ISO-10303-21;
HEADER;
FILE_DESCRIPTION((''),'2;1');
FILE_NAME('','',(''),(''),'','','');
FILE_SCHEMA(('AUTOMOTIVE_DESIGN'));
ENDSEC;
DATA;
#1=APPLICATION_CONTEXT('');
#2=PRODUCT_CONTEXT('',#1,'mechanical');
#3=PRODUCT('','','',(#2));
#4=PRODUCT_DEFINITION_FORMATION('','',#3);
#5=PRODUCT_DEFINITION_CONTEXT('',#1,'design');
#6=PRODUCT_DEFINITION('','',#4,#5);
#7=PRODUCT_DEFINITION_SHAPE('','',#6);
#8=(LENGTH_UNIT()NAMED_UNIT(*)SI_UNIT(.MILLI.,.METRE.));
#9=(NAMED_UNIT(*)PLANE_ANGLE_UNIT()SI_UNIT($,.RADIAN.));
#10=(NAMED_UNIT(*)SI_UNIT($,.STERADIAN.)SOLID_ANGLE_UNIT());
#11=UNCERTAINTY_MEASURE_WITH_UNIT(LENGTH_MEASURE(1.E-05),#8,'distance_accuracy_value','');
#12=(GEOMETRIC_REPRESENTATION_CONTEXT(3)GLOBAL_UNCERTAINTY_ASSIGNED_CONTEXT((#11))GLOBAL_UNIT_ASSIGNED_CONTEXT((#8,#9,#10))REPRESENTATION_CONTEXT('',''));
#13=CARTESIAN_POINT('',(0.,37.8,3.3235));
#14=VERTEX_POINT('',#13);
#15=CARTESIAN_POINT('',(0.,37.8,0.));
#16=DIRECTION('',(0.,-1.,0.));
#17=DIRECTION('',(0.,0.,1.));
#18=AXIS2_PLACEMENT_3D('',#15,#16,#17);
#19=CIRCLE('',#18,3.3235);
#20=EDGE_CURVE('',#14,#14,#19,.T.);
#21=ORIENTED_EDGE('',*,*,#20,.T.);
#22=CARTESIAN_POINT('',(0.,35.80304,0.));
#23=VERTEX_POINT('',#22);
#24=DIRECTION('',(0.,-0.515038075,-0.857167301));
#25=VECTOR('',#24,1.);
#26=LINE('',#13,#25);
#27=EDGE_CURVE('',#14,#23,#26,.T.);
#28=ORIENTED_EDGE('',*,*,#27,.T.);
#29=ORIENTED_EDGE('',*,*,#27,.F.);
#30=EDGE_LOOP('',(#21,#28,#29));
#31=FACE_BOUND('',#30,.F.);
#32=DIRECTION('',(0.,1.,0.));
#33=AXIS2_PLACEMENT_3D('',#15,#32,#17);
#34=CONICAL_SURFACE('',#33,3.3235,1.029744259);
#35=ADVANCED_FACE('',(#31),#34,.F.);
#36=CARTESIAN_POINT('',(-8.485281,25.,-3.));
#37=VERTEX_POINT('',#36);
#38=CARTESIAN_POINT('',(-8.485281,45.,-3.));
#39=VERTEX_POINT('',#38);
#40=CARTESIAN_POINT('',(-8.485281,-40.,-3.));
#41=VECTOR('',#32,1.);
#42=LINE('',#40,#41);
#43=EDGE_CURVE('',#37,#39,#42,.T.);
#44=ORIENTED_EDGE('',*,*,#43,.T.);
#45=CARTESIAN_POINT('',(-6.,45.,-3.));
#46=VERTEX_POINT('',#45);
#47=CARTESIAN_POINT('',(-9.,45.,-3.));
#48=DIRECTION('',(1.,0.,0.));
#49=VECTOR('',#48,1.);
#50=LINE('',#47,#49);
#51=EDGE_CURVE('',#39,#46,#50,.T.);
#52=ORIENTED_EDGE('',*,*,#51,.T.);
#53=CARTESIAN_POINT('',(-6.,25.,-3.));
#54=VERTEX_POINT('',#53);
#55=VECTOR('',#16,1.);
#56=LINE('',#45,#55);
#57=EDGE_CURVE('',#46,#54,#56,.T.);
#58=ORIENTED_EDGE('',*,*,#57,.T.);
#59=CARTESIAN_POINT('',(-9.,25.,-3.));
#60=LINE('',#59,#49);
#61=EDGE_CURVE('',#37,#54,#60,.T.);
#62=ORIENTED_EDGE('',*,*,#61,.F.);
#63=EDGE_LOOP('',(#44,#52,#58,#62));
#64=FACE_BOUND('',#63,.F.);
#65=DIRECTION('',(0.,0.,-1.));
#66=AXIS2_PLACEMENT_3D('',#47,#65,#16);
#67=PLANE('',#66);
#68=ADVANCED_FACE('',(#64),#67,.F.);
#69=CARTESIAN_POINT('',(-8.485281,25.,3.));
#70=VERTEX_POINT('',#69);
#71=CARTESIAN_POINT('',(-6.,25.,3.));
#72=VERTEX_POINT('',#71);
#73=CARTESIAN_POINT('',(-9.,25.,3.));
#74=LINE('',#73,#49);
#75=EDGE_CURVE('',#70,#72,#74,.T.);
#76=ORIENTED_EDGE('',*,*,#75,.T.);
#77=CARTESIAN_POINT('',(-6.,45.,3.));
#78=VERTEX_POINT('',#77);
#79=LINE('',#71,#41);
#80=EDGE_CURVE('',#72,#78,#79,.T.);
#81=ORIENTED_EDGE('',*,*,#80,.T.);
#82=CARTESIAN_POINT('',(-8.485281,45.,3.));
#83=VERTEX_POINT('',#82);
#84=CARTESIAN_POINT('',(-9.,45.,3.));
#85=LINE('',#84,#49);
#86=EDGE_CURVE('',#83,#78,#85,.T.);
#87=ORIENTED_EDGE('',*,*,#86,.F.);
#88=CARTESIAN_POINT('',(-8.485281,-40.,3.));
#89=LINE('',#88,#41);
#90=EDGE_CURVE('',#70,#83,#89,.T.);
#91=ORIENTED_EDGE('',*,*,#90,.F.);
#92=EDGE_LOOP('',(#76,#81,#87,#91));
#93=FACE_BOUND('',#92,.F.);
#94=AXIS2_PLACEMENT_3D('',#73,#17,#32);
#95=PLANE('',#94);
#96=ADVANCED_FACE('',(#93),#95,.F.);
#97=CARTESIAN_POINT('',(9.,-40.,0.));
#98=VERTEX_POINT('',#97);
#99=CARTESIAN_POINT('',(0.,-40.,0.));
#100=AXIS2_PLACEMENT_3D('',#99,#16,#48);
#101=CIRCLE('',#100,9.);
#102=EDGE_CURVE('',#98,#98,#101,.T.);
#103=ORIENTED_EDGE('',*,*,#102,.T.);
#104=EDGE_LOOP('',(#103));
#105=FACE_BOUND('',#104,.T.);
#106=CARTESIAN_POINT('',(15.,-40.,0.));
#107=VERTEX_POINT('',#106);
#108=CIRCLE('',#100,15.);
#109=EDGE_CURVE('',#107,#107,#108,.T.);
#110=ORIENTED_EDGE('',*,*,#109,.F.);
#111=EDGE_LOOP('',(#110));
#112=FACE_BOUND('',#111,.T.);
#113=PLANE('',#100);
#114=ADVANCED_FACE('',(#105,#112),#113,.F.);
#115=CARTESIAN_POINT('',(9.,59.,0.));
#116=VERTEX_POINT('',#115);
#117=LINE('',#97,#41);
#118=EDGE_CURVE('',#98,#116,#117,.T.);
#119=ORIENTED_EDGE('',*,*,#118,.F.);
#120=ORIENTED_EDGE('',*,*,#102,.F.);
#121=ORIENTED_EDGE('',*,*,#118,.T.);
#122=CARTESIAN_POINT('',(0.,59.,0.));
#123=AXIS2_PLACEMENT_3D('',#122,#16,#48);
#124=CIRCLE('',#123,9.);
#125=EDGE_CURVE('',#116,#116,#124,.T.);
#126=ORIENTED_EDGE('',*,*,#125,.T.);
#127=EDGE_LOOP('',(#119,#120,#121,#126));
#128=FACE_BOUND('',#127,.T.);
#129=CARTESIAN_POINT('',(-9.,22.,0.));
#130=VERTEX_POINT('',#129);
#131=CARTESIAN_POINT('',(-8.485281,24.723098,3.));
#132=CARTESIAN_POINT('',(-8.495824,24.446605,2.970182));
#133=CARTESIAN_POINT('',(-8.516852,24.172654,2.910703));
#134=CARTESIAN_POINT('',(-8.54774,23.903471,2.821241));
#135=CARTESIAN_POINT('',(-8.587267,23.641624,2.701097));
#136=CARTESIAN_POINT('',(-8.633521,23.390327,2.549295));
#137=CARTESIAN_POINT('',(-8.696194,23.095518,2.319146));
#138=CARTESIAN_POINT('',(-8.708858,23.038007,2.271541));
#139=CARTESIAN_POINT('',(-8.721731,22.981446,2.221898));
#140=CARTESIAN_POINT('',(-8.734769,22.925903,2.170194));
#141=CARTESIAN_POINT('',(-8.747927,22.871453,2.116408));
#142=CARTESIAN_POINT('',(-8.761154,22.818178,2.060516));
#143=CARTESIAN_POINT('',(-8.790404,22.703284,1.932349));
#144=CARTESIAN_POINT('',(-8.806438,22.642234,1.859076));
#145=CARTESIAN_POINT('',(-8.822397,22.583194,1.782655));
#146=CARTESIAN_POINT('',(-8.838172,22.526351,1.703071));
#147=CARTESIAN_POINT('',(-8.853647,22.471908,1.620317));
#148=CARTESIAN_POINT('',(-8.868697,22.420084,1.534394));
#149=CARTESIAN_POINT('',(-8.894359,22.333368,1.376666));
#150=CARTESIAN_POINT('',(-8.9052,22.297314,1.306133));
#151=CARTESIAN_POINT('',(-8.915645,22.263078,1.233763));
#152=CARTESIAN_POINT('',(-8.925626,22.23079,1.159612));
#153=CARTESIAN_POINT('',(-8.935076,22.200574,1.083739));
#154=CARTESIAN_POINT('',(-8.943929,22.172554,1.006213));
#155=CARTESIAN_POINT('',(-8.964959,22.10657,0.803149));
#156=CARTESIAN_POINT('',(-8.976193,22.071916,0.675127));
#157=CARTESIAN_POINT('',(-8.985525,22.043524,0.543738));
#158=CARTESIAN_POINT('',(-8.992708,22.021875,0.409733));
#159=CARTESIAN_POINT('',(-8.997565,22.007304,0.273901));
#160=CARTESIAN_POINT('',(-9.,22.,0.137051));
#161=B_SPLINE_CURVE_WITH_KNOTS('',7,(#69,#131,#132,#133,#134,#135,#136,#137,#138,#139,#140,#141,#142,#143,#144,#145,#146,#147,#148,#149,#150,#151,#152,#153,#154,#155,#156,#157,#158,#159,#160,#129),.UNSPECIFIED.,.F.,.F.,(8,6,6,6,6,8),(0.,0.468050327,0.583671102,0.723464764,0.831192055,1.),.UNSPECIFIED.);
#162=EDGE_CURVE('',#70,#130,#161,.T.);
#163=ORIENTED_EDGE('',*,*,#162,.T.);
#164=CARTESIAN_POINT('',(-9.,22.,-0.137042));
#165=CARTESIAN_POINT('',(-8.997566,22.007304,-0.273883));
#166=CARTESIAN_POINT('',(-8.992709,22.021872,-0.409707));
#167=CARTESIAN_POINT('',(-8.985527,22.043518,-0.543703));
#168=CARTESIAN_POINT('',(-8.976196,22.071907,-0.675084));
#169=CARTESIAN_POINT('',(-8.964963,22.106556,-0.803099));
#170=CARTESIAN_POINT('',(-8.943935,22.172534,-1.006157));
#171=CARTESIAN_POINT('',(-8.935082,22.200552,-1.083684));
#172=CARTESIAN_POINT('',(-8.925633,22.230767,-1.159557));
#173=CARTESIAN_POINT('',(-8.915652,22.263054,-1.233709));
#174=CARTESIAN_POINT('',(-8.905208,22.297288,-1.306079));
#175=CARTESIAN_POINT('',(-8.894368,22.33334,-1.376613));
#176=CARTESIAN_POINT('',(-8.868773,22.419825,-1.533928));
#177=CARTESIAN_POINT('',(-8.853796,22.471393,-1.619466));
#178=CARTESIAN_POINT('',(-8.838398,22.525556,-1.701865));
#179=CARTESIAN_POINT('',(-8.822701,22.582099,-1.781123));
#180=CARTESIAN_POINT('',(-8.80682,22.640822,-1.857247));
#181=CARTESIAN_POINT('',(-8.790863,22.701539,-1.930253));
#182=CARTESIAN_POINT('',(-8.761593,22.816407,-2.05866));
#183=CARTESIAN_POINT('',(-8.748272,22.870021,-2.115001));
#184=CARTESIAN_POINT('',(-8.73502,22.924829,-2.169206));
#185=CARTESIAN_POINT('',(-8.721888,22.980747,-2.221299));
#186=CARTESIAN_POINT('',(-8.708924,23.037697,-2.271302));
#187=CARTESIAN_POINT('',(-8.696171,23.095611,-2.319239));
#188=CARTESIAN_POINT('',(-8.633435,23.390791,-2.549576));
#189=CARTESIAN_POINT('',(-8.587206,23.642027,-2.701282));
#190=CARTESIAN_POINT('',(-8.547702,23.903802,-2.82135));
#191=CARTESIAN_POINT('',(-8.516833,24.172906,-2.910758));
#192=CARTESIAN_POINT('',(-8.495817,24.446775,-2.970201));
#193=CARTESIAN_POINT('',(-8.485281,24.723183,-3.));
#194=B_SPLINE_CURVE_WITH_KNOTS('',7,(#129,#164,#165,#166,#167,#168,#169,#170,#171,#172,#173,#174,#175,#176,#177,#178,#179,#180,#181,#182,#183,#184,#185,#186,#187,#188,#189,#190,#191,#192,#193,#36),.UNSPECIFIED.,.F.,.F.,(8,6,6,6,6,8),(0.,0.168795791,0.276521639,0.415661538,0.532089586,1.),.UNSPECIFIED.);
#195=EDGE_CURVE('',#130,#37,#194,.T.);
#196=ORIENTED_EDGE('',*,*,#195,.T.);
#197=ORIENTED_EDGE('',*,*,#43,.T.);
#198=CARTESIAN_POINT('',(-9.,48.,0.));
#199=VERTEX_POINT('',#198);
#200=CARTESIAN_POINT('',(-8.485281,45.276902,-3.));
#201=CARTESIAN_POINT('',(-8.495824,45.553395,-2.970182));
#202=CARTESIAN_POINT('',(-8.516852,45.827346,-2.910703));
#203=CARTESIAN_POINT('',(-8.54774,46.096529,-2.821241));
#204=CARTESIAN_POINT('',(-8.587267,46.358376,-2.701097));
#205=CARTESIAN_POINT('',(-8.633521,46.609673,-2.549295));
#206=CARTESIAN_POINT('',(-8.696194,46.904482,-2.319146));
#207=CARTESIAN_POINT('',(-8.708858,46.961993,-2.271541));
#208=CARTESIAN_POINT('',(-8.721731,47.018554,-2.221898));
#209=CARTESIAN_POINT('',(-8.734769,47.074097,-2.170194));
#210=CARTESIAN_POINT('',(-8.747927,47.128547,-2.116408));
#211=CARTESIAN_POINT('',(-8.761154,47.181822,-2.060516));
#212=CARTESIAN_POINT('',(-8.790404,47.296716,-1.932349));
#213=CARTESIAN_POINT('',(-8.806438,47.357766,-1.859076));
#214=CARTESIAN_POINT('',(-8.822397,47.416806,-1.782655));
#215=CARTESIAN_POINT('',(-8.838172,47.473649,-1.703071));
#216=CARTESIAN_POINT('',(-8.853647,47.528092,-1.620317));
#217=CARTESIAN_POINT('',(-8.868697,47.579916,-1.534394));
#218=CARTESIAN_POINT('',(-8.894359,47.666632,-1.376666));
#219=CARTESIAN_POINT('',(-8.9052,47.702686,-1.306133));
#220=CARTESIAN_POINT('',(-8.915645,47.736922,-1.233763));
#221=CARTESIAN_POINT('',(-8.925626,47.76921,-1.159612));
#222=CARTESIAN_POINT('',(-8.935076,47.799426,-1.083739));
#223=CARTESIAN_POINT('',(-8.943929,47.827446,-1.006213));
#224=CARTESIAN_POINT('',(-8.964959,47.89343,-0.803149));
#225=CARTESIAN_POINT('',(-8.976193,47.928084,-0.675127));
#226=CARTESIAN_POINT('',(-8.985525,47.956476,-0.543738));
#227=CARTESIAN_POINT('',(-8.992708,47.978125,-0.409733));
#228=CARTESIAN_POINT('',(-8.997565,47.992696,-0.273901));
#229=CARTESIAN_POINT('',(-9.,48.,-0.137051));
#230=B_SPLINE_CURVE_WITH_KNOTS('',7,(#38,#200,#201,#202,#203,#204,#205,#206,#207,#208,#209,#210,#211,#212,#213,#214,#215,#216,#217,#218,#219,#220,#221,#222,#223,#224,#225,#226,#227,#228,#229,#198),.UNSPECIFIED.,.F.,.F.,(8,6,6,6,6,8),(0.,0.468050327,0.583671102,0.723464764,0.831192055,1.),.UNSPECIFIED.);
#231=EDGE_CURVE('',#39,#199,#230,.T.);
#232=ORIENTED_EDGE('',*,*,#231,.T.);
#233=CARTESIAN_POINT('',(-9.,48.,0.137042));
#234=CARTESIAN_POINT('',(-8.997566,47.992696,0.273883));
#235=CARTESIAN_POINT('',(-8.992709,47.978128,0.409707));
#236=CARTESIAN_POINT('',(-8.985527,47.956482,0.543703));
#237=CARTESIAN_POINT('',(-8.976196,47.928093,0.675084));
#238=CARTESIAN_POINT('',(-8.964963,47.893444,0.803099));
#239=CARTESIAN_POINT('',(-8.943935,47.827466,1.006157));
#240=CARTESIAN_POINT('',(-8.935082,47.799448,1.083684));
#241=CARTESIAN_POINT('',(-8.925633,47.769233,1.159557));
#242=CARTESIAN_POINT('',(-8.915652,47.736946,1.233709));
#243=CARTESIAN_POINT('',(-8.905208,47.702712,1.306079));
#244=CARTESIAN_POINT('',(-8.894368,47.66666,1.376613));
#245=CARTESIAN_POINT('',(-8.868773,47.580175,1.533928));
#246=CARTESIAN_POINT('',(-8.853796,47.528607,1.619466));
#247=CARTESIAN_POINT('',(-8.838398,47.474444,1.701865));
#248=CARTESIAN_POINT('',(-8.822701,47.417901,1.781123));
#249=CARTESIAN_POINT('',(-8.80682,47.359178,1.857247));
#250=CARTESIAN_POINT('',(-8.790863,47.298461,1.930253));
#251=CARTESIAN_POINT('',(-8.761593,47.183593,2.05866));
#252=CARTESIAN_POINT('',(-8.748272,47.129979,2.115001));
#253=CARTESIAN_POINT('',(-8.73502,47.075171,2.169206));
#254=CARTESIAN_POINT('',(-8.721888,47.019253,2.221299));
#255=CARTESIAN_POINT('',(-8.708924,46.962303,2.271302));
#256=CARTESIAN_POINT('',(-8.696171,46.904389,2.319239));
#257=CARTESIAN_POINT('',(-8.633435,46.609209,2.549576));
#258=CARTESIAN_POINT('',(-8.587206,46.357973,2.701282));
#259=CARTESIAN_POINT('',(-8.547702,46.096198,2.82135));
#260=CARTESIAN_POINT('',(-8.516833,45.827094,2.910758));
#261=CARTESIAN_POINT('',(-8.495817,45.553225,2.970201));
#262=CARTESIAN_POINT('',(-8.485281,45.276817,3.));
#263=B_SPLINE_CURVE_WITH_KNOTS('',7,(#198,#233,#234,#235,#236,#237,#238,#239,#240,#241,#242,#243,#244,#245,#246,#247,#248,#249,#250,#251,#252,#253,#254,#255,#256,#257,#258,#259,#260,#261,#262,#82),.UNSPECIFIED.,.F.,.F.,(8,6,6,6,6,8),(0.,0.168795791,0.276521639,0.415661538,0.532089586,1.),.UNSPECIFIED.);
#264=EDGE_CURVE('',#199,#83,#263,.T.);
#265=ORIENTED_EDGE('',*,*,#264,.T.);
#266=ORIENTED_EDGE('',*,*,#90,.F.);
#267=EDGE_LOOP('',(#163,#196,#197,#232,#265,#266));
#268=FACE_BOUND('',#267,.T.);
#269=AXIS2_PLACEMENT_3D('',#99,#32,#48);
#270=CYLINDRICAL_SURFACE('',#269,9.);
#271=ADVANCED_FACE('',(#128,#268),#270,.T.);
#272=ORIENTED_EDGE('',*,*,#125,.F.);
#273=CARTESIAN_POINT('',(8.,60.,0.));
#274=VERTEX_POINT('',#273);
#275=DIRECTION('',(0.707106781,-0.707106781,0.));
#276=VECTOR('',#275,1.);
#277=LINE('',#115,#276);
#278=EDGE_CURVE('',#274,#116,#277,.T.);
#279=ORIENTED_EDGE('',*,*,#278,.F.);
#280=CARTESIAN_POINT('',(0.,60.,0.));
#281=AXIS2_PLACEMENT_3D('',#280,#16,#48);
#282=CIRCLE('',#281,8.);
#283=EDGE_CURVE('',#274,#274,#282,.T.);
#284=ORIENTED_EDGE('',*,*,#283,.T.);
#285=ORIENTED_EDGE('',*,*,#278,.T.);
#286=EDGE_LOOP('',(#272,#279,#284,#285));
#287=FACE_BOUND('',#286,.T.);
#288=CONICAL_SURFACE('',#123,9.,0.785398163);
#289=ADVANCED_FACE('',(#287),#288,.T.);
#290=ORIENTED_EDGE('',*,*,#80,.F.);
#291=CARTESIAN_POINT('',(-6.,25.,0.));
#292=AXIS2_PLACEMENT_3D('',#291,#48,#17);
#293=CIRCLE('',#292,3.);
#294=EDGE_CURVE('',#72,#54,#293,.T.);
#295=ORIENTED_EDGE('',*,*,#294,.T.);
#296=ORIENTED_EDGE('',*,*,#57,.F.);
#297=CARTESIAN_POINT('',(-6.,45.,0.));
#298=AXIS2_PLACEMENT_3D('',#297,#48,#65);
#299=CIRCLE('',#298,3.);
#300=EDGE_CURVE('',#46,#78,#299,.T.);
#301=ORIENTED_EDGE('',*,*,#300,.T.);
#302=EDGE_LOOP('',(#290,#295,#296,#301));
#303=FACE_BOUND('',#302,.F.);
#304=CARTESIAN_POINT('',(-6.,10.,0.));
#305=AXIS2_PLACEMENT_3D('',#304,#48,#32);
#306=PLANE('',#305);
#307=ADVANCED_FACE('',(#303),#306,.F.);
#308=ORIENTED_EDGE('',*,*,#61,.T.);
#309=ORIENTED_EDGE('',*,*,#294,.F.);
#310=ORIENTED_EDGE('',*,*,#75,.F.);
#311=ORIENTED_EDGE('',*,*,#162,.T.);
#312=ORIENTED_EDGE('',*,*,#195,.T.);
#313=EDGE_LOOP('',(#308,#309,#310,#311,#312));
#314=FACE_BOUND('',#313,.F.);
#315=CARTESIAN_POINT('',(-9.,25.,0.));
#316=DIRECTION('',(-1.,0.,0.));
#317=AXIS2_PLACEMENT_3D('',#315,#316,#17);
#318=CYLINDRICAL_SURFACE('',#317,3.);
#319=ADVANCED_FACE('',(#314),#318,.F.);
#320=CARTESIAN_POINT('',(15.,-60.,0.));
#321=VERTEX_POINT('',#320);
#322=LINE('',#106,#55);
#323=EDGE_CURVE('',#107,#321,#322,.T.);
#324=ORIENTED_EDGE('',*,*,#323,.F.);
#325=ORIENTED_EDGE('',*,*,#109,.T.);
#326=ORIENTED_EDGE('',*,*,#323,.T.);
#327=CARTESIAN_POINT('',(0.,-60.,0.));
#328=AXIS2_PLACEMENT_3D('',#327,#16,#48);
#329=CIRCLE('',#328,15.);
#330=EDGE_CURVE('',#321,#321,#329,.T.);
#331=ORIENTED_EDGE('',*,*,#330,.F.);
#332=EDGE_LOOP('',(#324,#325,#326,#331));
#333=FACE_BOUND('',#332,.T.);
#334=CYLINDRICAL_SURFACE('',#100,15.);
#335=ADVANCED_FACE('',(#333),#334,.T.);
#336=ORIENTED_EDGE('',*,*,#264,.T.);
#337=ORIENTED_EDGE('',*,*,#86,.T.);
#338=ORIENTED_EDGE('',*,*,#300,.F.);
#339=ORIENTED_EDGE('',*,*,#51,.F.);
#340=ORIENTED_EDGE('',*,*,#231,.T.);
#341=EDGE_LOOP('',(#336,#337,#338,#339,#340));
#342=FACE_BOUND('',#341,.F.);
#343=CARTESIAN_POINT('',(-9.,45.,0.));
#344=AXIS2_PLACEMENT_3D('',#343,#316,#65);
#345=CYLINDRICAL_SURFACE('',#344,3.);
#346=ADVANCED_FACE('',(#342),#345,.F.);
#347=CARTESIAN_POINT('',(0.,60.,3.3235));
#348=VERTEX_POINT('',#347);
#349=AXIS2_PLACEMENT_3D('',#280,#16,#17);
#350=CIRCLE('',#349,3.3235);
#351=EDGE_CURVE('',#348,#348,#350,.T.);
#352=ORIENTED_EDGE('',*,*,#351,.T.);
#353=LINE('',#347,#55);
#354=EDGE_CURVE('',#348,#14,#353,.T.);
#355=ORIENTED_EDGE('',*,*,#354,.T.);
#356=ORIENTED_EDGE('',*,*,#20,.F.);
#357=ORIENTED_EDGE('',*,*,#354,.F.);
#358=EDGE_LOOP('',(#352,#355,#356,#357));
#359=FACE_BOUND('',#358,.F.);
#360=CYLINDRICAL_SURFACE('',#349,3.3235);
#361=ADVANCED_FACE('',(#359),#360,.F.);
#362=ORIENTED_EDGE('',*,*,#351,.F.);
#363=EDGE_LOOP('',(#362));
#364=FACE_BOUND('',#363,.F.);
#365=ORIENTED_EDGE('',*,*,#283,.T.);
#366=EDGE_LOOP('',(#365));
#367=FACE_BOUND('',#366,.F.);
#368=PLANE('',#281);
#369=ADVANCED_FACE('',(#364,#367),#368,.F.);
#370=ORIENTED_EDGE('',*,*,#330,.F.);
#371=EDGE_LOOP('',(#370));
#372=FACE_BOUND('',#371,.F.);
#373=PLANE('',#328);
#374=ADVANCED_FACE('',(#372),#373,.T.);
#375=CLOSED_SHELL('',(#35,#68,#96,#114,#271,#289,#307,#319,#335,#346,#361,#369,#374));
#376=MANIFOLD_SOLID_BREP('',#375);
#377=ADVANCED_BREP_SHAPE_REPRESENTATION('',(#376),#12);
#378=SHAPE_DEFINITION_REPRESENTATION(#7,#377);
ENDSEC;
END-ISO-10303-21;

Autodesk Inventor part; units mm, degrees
ref_plane "XZ Plane" through (0, 0, 0) normal (0, 1, 0) x (-1, 0, 0)
ref_plane "XY Plane" through (0, 0, 0) normal (0, 0, 1) x (1, 0, 0)
sketch "Sketch1" plane through (0, 0, 0) normal (0, 0, 1) x (1, 0, 0)
  line L0 (0, 60) -> (0, -60)
  line L1 (0, -60) -> (15, -60)
  line L2 (9, 60) -> (0, 60)
  line L3 (9, -40) -> (15, -40)
  line L4 (9, -40) -> (9, 60)
  line L5 (15, -40) -> (15, -60)
  point P0 (0, 0)
  point P1 (0, 0)
  dimension "d17" = 18
  dimension "d18" = 20
  dimension "d19" = 30
  dimension "d42" = 100
revolve "Revolution1" add sketch "Sketch1" angle 360 about axis through (0, 60, 0) along (0, -1, 0)
sketch "Sketch4" plane through (0, 60, 0) normal (0, 1, 0) x (1, 0, 0)
  point P0 (0, 0)
  point P1 (0, 0)
hole "Hole1" at (0, 60, 0) direction (0, -1, 0) diameter 6.647 depth 22.2 tip angle 118 thread size "M8x1.25" class "6H" standard "ISO Metric profile"
chamfer "Chamfer1" distance 1 angle 45 1 edges at (-9, 60, 0)
ref_plane "Work Plane1" through (-9, 10, 0) normal (1, 0, 0) x (0, 1, 0)
sketch "Sketch5" plane through (-9, 10, 0) normal (1, 0, 0) x (0, 1, 0)
  line L0 (-50, 9) -> (-50, -9) projected
  line L1 (49, -9) -> (49, 9) projected
  line L2 (35, 0) -> (15, 0) construction
  line L3 (35, -3) -> (15, -3)
  line L4 (15, 3) -> (35, 3)
  arc A0 (35, -3) -> (35, 3) centre (35, 0) ccw
  arc A1 (15, 3) -> (15, -3) centre (15, 0) ccw
  line L5 (50, 8) -> (50, -8) projected
  point P0 (-10, 0)
  point P1 (25, 0)
  dimension "d36" = 6
  dimension "d37" = 20
  dimension "d39" = 15
extrude "Extrusion3" cut sketch "Sketch5" along normal blind 3
properties part number "приводной вал"
